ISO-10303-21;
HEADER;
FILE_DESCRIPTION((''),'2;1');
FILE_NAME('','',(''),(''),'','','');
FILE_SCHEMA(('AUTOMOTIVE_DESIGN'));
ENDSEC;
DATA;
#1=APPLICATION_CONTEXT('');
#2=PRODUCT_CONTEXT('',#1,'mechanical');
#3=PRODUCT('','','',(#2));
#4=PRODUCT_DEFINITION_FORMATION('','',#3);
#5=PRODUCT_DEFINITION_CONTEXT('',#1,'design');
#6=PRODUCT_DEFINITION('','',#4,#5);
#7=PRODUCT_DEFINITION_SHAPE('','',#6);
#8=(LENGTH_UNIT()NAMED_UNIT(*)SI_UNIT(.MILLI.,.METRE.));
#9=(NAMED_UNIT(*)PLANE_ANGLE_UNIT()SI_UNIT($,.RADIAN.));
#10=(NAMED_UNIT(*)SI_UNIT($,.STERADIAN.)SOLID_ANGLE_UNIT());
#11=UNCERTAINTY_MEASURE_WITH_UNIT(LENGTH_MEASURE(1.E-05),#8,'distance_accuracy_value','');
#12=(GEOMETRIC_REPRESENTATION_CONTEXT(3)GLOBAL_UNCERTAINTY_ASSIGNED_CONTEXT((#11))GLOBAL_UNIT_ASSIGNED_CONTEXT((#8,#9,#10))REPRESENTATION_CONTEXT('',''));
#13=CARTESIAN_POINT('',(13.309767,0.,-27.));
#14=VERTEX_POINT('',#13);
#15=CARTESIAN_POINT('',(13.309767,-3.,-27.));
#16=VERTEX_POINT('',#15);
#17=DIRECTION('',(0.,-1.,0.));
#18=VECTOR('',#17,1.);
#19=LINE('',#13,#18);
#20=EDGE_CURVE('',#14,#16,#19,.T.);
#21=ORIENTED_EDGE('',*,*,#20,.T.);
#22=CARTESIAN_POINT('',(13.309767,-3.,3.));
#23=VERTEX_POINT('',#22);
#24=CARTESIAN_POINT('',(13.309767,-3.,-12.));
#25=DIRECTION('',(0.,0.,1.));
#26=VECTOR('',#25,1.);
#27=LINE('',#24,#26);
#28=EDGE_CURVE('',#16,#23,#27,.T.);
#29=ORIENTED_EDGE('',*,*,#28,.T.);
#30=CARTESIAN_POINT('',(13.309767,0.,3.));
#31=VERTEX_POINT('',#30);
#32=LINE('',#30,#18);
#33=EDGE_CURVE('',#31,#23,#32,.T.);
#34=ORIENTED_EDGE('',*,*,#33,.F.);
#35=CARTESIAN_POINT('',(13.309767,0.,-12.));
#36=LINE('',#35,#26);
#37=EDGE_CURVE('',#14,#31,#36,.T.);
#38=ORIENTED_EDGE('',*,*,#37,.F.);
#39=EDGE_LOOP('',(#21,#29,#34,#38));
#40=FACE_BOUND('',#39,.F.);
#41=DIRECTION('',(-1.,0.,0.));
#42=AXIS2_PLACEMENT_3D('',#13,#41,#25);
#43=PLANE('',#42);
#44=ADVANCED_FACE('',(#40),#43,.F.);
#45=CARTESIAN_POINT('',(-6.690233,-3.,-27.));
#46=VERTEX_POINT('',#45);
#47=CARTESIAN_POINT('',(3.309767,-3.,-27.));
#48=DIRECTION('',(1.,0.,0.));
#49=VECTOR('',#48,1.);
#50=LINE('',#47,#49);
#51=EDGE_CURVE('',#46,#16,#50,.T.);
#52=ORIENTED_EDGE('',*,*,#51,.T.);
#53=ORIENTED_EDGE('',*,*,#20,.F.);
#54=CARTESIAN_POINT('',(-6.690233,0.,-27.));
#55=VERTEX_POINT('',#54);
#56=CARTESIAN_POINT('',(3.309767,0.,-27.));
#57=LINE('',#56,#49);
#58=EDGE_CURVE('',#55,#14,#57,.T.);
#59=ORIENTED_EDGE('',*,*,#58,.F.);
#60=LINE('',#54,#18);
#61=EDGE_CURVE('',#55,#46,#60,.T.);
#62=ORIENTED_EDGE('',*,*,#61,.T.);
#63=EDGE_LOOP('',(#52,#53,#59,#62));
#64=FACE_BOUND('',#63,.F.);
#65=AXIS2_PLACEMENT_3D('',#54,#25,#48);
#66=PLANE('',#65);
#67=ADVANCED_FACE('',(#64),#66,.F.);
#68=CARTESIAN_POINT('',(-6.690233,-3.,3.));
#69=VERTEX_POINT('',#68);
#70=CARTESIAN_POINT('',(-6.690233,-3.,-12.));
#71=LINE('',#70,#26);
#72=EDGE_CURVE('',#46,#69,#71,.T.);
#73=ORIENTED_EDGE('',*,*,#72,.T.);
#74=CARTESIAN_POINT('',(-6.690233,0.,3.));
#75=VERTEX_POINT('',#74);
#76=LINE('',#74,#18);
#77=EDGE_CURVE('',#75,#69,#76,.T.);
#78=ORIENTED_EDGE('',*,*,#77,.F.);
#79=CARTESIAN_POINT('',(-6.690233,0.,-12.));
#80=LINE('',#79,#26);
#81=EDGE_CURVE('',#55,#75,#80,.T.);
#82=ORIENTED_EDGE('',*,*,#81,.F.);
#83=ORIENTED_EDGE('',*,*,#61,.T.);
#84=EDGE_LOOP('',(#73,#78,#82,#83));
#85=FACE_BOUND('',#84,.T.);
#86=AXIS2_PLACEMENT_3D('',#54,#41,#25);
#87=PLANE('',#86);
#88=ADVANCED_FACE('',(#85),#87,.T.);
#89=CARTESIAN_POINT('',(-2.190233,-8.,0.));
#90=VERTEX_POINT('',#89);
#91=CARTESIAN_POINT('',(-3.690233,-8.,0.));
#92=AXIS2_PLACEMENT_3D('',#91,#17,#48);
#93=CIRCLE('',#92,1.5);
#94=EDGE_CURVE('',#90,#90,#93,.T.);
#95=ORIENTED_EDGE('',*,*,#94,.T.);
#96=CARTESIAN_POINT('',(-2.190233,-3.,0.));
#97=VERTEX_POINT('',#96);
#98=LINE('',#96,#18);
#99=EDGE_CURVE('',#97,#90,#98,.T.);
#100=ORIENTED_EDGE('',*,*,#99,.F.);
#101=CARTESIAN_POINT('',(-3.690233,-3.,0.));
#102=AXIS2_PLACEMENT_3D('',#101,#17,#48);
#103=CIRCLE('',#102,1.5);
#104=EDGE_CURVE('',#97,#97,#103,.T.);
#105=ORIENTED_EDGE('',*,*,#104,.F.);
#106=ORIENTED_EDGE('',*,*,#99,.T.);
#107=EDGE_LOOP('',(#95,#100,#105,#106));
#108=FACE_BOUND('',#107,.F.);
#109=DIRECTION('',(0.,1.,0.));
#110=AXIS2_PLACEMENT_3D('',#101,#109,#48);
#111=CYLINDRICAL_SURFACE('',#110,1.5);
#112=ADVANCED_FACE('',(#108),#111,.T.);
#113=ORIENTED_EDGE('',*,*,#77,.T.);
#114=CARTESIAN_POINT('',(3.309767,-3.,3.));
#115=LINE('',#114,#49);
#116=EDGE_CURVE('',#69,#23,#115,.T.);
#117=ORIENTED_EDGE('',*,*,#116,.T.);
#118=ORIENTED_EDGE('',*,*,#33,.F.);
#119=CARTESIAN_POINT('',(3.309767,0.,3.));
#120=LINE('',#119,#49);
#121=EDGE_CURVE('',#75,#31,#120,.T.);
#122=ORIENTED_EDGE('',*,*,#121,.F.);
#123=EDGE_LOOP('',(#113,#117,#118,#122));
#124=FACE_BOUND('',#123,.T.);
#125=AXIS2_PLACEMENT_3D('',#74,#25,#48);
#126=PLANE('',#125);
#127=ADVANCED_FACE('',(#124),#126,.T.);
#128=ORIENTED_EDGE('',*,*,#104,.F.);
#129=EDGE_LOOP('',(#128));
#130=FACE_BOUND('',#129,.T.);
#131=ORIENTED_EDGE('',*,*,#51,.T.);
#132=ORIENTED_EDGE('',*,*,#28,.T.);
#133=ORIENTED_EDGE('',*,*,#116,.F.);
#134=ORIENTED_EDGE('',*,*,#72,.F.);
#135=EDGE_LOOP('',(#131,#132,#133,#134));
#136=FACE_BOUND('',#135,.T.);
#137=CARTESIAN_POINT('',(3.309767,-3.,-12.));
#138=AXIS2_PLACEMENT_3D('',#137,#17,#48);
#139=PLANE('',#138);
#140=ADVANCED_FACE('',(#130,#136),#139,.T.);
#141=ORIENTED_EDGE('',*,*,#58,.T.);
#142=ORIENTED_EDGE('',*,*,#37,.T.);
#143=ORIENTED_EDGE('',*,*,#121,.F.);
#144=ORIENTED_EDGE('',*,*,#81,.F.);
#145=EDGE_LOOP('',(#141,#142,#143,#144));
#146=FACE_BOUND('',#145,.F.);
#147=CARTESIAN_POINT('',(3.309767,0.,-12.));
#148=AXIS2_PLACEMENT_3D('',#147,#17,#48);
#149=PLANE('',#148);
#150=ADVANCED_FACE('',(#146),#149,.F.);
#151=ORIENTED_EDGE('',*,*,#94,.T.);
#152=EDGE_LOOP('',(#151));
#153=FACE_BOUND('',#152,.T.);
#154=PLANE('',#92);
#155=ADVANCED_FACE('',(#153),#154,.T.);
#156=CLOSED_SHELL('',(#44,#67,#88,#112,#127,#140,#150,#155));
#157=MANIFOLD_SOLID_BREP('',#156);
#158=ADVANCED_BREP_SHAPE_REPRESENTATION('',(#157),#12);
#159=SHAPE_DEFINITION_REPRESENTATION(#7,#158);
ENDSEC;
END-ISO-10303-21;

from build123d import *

# Parameters (mm, degrees)
F0_W     = 20
F0_H     = 30
F1_DEPTH = 3
F2_R     = 1.5
F3_DEPTH = 5


# Not quite as in the source:
# - a feature names something its author has since deleted; it is built from what else it names


with BuildPart() as f1:
    # F0 (on Front) → F1 (new body)
    with BuildSketch(Plane.XZ):
        with Locations((3.3097672276, -12)):
            Rectangle(F0_W, F0_H)
    extrude(amount=F1_DEPTH)

    # F2 (on face) → F3 (join)
    with BuildSketch(Plane.XZ.offset(3)):
        with Locations((-3.6902327724, 0)):
            Circle(F2_R)
    extrude(amount=F3_DEPTH)


solid = f1.part
